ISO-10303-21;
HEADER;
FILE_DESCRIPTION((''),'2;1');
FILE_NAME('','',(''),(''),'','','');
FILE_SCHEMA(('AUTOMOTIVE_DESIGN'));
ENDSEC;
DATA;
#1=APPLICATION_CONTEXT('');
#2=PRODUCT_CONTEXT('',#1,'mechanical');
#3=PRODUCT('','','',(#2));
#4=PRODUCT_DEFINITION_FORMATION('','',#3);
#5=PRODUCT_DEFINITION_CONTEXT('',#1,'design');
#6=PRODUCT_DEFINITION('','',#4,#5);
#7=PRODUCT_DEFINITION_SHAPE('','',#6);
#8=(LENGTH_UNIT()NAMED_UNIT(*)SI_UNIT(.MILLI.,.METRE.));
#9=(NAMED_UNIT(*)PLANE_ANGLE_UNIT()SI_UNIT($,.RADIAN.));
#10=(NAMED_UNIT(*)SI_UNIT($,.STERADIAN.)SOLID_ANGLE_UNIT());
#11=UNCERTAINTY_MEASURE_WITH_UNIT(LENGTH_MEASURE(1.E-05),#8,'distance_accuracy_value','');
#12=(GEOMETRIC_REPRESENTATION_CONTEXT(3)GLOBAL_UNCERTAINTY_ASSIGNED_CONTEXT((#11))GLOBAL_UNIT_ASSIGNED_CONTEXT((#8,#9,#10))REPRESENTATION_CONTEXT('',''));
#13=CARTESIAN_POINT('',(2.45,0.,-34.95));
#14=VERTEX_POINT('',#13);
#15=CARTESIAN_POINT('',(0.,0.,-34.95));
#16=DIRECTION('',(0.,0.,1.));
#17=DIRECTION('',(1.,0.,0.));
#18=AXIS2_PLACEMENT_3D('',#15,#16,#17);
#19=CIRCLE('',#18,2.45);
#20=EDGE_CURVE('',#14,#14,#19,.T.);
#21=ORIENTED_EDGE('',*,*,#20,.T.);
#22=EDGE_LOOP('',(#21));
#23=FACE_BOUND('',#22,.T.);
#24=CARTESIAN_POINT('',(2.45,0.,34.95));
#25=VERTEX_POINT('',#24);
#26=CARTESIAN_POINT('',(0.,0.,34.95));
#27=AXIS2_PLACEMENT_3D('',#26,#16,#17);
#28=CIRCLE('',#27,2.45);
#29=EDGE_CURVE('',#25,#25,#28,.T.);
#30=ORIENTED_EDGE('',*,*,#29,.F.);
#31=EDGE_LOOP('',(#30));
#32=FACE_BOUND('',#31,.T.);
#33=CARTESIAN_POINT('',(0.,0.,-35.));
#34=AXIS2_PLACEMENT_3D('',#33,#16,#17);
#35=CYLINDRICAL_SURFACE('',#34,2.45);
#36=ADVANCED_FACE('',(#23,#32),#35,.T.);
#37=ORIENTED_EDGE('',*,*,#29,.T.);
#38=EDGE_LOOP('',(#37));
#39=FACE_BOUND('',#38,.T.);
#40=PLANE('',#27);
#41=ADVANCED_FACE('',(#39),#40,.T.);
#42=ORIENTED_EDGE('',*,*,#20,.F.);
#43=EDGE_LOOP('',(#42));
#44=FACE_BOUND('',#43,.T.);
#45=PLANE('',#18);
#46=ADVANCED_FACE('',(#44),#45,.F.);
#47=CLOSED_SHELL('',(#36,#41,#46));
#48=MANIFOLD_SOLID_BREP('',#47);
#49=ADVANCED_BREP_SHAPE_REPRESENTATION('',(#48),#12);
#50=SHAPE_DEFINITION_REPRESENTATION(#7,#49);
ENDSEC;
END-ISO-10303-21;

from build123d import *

# Parameters (mm, degrees)
BOSS_EXTRUDE1_DEPTH      = 35
BOSS_EXTRUDE1_DEPTH_BACK = 35
SKETCH1_R                = 2.5
MOVE_START               = -35
MOVE_FACE1_OUTLINE_R     = 2.5
MOVE_FACE1_OUTLINE_R_2   = 2.45
MOVE_FACE1_DEPTH         = 70
MOVE_FACE1_2_OUTLINE_R   = 2.45
MOVE_FACE1_2_DEPTH       = 0.05
MOVE_START_2             = 34.95
MOVE_FACE1_3_OUTLINE_R   = 2.45
MOVE_FACE1_3_DEPTH       = 0.05


# Read off the part's stored shape, not the designer's step: Move Face1
with BuildPart() as part:
    # Sketch1 → Boss-Extrude1 (new, two sides: drawn at the far end of the back side and taken through both)
    with BuildSketch(Plane.XY.offset(-BOSS_EXTRUDE1_DEPTH_BACK)):
        Circle(SKETCH1_R)
    extrude(amount=BOSS_EXTRUDE1_DEPTH + BOSS_EXTRUDE1_DEPTH_BACK)

    # Move Face1 outline → Move Face1 (cut)
    with BuildSketch(Plane.XY.offset(MOVE_START)):
        Circle(MOVE_FACE1_OUTLINE_R)
        Circle(MOVE_FACE1_OUTLINE_R_2, mode=Mode.SUBTRACT)
    extrude(amount=MOVE_FACE1_DEPTH, mode=Mode.SUBTRACT)

    # Move Face1 2 outline → Move Face1 2 (cut)
    with BuildSketch(Plane.XY.offset(MOVE_START)):
        Circle(MOVE_FACE1_2_OUTLINE_R)
    extrude(amount=MOVE_FACE1_2_DEPTH, mode=Mode.SUBTRACT)

    # Move Face1 3 outline → Move Face1 3 (cut)
    with BuildSketch(Plane.XY.offset(MOVE_START_2)):
        Circle(MOVE_FACE1_3_OUTLINE_R)
    extrude(amount=MOVE_FACE1_3_DEPTH, mode=Mode.SUBTRACT)


solid = part.part
